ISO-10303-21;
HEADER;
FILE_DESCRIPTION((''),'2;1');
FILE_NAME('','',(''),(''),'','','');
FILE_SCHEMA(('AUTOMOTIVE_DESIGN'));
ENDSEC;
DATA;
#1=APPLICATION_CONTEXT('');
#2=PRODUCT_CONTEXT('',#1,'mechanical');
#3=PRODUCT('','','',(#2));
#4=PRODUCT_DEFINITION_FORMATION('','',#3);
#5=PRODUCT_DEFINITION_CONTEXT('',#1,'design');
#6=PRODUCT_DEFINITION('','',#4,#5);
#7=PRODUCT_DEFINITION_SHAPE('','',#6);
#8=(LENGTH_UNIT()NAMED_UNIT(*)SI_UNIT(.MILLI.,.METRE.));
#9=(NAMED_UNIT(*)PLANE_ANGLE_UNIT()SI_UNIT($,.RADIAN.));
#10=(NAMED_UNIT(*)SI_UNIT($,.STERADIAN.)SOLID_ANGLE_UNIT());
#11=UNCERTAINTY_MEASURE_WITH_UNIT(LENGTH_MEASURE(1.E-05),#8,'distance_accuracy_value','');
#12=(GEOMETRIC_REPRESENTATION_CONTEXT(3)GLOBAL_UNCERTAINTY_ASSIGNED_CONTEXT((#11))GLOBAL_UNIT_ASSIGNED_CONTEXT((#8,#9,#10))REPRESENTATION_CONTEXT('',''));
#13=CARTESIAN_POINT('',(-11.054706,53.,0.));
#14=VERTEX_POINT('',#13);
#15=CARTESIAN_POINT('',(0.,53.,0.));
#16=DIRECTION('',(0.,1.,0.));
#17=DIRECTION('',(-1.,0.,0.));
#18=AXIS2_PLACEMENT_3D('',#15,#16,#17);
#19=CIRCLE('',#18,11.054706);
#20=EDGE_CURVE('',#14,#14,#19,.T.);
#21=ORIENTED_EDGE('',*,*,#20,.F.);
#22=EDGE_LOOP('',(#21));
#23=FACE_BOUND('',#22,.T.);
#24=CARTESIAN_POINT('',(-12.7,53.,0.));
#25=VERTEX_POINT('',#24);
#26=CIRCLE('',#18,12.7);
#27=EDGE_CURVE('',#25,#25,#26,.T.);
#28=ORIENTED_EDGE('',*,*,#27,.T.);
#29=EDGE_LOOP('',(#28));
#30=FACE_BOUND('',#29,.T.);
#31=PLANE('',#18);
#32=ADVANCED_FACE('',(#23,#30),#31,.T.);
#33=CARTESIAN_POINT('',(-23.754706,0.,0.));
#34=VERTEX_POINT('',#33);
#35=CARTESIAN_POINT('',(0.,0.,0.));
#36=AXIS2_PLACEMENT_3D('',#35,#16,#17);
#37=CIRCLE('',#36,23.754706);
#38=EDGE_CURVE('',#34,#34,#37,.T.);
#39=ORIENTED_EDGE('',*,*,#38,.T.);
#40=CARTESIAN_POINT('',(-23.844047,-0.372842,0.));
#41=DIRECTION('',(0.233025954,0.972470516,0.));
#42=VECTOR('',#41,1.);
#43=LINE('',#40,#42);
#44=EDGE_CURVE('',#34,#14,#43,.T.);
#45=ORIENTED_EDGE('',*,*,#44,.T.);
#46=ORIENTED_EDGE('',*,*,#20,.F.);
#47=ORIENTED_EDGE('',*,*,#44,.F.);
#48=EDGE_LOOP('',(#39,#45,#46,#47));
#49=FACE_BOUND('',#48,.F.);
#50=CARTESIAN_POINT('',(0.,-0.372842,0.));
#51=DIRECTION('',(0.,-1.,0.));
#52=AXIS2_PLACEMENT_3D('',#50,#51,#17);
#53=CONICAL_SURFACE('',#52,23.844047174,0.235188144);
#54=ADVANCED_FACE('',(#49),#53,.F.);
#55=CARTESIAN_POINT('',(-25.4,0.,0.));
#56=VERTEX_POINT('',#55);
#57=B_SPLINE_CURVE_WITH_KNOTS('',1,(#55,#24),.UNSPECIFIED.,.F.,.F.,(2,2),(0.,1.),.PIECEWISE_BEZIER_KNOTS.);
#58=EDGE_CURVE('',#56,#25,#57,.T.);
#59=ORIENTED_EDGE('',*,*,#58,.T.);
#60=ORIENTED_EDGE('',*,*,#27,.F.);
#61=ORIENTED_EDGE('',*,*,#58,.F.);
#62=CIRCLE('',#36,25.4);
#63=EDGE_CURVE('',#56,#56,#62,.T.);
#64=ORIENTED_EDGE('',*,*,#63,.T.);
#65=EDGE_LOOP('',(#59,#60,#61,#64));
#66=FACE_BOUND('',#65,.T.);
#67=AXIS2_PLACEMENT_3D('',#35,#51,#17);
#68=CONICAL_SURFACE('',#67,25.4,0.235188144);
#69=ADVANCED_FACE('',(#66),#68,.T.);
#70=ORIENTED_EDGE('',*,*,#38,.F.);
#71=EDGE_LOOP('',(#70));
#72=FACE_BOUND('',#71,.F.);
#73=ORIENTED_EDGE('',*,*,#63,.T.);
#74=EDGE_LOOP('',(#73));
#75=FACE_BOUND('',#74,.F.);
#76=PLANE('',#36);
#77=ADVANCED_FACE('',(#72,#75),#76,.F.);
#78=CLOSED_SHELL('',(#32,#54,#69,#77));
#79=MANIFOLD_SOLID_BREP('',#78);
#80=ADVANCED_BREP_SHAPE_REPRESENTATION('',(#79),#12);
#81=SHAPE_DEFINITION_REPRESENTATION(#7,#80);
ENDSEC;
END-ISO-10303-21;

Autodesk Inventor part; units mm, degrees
ref_plane "YZ Plane" through (0, 0, 0) normal (1, 0, 0) x (0, 1, 0)
ref_plane "XY Plane" through (0, 0, 0) normal (0, 0, 1) x (1, 0, 0)
sketch "Szkic6" plane through (0, 0, 0) normal (0, 1, 0) x (-1, 0, 0)
  circle A0 centre (0, 0) radius 25.4
  dimension "d33" = 50.8
ref_plane "Płaszczyzna konstrukcyjna1" through (0, 53, 0) normal (0, 1, 0) x (-1, 0, 0)
sketch "Szkic7" plane through (0, 53, 0) normal (0, 1, 0) x (-1, 0, 0)
  circle A0 centre (0, 0) radius 12.7
  dimension "d35" = 25.4
loft "Wyciągnięcie złożone1" add profiles "Szkic6", "Szkic7"
shell "Skorupa1" thickness 1.6 removed faces 2 at (3.6254, 53, -0.9542) at (7.2508, 0, -1.9085)
equation "\"d33\" = OD1"
equation "\"d35\" = OD2"
equation "\"d52\" = THK"
equation "\"SzerokośćGięciaPodcięcia\" = Grubość"
equation "\"RozmiarPodcięciaNarożnika\" = 4 * Grubość"
equation "\"PromieńPrzejścia\" = PromieńGięcia"
equation "\"Rozmiar_promienia_Jacobiego\" = PromieńGięcia"
equation "\"Wielk_odstępu\" = Grubość"
equation "\"d2\" = PromieńGięcia"
equation "\"d23\" = PromieńGięcia"
equation "\"OD1\" = 50.8"
equation "\"OD2\" = 25.4"
equation "\"L\" = 53"
equation "\"THK\" = 1.6"
equation "\"d34\" = L"
equation "\"Grubość\" = 1.5"
equation "\"PromieńGięcia\" = 3"
properties part number "Redukcja symetryczna Ø50,8x25,4x1,6 L=53" material "304"
